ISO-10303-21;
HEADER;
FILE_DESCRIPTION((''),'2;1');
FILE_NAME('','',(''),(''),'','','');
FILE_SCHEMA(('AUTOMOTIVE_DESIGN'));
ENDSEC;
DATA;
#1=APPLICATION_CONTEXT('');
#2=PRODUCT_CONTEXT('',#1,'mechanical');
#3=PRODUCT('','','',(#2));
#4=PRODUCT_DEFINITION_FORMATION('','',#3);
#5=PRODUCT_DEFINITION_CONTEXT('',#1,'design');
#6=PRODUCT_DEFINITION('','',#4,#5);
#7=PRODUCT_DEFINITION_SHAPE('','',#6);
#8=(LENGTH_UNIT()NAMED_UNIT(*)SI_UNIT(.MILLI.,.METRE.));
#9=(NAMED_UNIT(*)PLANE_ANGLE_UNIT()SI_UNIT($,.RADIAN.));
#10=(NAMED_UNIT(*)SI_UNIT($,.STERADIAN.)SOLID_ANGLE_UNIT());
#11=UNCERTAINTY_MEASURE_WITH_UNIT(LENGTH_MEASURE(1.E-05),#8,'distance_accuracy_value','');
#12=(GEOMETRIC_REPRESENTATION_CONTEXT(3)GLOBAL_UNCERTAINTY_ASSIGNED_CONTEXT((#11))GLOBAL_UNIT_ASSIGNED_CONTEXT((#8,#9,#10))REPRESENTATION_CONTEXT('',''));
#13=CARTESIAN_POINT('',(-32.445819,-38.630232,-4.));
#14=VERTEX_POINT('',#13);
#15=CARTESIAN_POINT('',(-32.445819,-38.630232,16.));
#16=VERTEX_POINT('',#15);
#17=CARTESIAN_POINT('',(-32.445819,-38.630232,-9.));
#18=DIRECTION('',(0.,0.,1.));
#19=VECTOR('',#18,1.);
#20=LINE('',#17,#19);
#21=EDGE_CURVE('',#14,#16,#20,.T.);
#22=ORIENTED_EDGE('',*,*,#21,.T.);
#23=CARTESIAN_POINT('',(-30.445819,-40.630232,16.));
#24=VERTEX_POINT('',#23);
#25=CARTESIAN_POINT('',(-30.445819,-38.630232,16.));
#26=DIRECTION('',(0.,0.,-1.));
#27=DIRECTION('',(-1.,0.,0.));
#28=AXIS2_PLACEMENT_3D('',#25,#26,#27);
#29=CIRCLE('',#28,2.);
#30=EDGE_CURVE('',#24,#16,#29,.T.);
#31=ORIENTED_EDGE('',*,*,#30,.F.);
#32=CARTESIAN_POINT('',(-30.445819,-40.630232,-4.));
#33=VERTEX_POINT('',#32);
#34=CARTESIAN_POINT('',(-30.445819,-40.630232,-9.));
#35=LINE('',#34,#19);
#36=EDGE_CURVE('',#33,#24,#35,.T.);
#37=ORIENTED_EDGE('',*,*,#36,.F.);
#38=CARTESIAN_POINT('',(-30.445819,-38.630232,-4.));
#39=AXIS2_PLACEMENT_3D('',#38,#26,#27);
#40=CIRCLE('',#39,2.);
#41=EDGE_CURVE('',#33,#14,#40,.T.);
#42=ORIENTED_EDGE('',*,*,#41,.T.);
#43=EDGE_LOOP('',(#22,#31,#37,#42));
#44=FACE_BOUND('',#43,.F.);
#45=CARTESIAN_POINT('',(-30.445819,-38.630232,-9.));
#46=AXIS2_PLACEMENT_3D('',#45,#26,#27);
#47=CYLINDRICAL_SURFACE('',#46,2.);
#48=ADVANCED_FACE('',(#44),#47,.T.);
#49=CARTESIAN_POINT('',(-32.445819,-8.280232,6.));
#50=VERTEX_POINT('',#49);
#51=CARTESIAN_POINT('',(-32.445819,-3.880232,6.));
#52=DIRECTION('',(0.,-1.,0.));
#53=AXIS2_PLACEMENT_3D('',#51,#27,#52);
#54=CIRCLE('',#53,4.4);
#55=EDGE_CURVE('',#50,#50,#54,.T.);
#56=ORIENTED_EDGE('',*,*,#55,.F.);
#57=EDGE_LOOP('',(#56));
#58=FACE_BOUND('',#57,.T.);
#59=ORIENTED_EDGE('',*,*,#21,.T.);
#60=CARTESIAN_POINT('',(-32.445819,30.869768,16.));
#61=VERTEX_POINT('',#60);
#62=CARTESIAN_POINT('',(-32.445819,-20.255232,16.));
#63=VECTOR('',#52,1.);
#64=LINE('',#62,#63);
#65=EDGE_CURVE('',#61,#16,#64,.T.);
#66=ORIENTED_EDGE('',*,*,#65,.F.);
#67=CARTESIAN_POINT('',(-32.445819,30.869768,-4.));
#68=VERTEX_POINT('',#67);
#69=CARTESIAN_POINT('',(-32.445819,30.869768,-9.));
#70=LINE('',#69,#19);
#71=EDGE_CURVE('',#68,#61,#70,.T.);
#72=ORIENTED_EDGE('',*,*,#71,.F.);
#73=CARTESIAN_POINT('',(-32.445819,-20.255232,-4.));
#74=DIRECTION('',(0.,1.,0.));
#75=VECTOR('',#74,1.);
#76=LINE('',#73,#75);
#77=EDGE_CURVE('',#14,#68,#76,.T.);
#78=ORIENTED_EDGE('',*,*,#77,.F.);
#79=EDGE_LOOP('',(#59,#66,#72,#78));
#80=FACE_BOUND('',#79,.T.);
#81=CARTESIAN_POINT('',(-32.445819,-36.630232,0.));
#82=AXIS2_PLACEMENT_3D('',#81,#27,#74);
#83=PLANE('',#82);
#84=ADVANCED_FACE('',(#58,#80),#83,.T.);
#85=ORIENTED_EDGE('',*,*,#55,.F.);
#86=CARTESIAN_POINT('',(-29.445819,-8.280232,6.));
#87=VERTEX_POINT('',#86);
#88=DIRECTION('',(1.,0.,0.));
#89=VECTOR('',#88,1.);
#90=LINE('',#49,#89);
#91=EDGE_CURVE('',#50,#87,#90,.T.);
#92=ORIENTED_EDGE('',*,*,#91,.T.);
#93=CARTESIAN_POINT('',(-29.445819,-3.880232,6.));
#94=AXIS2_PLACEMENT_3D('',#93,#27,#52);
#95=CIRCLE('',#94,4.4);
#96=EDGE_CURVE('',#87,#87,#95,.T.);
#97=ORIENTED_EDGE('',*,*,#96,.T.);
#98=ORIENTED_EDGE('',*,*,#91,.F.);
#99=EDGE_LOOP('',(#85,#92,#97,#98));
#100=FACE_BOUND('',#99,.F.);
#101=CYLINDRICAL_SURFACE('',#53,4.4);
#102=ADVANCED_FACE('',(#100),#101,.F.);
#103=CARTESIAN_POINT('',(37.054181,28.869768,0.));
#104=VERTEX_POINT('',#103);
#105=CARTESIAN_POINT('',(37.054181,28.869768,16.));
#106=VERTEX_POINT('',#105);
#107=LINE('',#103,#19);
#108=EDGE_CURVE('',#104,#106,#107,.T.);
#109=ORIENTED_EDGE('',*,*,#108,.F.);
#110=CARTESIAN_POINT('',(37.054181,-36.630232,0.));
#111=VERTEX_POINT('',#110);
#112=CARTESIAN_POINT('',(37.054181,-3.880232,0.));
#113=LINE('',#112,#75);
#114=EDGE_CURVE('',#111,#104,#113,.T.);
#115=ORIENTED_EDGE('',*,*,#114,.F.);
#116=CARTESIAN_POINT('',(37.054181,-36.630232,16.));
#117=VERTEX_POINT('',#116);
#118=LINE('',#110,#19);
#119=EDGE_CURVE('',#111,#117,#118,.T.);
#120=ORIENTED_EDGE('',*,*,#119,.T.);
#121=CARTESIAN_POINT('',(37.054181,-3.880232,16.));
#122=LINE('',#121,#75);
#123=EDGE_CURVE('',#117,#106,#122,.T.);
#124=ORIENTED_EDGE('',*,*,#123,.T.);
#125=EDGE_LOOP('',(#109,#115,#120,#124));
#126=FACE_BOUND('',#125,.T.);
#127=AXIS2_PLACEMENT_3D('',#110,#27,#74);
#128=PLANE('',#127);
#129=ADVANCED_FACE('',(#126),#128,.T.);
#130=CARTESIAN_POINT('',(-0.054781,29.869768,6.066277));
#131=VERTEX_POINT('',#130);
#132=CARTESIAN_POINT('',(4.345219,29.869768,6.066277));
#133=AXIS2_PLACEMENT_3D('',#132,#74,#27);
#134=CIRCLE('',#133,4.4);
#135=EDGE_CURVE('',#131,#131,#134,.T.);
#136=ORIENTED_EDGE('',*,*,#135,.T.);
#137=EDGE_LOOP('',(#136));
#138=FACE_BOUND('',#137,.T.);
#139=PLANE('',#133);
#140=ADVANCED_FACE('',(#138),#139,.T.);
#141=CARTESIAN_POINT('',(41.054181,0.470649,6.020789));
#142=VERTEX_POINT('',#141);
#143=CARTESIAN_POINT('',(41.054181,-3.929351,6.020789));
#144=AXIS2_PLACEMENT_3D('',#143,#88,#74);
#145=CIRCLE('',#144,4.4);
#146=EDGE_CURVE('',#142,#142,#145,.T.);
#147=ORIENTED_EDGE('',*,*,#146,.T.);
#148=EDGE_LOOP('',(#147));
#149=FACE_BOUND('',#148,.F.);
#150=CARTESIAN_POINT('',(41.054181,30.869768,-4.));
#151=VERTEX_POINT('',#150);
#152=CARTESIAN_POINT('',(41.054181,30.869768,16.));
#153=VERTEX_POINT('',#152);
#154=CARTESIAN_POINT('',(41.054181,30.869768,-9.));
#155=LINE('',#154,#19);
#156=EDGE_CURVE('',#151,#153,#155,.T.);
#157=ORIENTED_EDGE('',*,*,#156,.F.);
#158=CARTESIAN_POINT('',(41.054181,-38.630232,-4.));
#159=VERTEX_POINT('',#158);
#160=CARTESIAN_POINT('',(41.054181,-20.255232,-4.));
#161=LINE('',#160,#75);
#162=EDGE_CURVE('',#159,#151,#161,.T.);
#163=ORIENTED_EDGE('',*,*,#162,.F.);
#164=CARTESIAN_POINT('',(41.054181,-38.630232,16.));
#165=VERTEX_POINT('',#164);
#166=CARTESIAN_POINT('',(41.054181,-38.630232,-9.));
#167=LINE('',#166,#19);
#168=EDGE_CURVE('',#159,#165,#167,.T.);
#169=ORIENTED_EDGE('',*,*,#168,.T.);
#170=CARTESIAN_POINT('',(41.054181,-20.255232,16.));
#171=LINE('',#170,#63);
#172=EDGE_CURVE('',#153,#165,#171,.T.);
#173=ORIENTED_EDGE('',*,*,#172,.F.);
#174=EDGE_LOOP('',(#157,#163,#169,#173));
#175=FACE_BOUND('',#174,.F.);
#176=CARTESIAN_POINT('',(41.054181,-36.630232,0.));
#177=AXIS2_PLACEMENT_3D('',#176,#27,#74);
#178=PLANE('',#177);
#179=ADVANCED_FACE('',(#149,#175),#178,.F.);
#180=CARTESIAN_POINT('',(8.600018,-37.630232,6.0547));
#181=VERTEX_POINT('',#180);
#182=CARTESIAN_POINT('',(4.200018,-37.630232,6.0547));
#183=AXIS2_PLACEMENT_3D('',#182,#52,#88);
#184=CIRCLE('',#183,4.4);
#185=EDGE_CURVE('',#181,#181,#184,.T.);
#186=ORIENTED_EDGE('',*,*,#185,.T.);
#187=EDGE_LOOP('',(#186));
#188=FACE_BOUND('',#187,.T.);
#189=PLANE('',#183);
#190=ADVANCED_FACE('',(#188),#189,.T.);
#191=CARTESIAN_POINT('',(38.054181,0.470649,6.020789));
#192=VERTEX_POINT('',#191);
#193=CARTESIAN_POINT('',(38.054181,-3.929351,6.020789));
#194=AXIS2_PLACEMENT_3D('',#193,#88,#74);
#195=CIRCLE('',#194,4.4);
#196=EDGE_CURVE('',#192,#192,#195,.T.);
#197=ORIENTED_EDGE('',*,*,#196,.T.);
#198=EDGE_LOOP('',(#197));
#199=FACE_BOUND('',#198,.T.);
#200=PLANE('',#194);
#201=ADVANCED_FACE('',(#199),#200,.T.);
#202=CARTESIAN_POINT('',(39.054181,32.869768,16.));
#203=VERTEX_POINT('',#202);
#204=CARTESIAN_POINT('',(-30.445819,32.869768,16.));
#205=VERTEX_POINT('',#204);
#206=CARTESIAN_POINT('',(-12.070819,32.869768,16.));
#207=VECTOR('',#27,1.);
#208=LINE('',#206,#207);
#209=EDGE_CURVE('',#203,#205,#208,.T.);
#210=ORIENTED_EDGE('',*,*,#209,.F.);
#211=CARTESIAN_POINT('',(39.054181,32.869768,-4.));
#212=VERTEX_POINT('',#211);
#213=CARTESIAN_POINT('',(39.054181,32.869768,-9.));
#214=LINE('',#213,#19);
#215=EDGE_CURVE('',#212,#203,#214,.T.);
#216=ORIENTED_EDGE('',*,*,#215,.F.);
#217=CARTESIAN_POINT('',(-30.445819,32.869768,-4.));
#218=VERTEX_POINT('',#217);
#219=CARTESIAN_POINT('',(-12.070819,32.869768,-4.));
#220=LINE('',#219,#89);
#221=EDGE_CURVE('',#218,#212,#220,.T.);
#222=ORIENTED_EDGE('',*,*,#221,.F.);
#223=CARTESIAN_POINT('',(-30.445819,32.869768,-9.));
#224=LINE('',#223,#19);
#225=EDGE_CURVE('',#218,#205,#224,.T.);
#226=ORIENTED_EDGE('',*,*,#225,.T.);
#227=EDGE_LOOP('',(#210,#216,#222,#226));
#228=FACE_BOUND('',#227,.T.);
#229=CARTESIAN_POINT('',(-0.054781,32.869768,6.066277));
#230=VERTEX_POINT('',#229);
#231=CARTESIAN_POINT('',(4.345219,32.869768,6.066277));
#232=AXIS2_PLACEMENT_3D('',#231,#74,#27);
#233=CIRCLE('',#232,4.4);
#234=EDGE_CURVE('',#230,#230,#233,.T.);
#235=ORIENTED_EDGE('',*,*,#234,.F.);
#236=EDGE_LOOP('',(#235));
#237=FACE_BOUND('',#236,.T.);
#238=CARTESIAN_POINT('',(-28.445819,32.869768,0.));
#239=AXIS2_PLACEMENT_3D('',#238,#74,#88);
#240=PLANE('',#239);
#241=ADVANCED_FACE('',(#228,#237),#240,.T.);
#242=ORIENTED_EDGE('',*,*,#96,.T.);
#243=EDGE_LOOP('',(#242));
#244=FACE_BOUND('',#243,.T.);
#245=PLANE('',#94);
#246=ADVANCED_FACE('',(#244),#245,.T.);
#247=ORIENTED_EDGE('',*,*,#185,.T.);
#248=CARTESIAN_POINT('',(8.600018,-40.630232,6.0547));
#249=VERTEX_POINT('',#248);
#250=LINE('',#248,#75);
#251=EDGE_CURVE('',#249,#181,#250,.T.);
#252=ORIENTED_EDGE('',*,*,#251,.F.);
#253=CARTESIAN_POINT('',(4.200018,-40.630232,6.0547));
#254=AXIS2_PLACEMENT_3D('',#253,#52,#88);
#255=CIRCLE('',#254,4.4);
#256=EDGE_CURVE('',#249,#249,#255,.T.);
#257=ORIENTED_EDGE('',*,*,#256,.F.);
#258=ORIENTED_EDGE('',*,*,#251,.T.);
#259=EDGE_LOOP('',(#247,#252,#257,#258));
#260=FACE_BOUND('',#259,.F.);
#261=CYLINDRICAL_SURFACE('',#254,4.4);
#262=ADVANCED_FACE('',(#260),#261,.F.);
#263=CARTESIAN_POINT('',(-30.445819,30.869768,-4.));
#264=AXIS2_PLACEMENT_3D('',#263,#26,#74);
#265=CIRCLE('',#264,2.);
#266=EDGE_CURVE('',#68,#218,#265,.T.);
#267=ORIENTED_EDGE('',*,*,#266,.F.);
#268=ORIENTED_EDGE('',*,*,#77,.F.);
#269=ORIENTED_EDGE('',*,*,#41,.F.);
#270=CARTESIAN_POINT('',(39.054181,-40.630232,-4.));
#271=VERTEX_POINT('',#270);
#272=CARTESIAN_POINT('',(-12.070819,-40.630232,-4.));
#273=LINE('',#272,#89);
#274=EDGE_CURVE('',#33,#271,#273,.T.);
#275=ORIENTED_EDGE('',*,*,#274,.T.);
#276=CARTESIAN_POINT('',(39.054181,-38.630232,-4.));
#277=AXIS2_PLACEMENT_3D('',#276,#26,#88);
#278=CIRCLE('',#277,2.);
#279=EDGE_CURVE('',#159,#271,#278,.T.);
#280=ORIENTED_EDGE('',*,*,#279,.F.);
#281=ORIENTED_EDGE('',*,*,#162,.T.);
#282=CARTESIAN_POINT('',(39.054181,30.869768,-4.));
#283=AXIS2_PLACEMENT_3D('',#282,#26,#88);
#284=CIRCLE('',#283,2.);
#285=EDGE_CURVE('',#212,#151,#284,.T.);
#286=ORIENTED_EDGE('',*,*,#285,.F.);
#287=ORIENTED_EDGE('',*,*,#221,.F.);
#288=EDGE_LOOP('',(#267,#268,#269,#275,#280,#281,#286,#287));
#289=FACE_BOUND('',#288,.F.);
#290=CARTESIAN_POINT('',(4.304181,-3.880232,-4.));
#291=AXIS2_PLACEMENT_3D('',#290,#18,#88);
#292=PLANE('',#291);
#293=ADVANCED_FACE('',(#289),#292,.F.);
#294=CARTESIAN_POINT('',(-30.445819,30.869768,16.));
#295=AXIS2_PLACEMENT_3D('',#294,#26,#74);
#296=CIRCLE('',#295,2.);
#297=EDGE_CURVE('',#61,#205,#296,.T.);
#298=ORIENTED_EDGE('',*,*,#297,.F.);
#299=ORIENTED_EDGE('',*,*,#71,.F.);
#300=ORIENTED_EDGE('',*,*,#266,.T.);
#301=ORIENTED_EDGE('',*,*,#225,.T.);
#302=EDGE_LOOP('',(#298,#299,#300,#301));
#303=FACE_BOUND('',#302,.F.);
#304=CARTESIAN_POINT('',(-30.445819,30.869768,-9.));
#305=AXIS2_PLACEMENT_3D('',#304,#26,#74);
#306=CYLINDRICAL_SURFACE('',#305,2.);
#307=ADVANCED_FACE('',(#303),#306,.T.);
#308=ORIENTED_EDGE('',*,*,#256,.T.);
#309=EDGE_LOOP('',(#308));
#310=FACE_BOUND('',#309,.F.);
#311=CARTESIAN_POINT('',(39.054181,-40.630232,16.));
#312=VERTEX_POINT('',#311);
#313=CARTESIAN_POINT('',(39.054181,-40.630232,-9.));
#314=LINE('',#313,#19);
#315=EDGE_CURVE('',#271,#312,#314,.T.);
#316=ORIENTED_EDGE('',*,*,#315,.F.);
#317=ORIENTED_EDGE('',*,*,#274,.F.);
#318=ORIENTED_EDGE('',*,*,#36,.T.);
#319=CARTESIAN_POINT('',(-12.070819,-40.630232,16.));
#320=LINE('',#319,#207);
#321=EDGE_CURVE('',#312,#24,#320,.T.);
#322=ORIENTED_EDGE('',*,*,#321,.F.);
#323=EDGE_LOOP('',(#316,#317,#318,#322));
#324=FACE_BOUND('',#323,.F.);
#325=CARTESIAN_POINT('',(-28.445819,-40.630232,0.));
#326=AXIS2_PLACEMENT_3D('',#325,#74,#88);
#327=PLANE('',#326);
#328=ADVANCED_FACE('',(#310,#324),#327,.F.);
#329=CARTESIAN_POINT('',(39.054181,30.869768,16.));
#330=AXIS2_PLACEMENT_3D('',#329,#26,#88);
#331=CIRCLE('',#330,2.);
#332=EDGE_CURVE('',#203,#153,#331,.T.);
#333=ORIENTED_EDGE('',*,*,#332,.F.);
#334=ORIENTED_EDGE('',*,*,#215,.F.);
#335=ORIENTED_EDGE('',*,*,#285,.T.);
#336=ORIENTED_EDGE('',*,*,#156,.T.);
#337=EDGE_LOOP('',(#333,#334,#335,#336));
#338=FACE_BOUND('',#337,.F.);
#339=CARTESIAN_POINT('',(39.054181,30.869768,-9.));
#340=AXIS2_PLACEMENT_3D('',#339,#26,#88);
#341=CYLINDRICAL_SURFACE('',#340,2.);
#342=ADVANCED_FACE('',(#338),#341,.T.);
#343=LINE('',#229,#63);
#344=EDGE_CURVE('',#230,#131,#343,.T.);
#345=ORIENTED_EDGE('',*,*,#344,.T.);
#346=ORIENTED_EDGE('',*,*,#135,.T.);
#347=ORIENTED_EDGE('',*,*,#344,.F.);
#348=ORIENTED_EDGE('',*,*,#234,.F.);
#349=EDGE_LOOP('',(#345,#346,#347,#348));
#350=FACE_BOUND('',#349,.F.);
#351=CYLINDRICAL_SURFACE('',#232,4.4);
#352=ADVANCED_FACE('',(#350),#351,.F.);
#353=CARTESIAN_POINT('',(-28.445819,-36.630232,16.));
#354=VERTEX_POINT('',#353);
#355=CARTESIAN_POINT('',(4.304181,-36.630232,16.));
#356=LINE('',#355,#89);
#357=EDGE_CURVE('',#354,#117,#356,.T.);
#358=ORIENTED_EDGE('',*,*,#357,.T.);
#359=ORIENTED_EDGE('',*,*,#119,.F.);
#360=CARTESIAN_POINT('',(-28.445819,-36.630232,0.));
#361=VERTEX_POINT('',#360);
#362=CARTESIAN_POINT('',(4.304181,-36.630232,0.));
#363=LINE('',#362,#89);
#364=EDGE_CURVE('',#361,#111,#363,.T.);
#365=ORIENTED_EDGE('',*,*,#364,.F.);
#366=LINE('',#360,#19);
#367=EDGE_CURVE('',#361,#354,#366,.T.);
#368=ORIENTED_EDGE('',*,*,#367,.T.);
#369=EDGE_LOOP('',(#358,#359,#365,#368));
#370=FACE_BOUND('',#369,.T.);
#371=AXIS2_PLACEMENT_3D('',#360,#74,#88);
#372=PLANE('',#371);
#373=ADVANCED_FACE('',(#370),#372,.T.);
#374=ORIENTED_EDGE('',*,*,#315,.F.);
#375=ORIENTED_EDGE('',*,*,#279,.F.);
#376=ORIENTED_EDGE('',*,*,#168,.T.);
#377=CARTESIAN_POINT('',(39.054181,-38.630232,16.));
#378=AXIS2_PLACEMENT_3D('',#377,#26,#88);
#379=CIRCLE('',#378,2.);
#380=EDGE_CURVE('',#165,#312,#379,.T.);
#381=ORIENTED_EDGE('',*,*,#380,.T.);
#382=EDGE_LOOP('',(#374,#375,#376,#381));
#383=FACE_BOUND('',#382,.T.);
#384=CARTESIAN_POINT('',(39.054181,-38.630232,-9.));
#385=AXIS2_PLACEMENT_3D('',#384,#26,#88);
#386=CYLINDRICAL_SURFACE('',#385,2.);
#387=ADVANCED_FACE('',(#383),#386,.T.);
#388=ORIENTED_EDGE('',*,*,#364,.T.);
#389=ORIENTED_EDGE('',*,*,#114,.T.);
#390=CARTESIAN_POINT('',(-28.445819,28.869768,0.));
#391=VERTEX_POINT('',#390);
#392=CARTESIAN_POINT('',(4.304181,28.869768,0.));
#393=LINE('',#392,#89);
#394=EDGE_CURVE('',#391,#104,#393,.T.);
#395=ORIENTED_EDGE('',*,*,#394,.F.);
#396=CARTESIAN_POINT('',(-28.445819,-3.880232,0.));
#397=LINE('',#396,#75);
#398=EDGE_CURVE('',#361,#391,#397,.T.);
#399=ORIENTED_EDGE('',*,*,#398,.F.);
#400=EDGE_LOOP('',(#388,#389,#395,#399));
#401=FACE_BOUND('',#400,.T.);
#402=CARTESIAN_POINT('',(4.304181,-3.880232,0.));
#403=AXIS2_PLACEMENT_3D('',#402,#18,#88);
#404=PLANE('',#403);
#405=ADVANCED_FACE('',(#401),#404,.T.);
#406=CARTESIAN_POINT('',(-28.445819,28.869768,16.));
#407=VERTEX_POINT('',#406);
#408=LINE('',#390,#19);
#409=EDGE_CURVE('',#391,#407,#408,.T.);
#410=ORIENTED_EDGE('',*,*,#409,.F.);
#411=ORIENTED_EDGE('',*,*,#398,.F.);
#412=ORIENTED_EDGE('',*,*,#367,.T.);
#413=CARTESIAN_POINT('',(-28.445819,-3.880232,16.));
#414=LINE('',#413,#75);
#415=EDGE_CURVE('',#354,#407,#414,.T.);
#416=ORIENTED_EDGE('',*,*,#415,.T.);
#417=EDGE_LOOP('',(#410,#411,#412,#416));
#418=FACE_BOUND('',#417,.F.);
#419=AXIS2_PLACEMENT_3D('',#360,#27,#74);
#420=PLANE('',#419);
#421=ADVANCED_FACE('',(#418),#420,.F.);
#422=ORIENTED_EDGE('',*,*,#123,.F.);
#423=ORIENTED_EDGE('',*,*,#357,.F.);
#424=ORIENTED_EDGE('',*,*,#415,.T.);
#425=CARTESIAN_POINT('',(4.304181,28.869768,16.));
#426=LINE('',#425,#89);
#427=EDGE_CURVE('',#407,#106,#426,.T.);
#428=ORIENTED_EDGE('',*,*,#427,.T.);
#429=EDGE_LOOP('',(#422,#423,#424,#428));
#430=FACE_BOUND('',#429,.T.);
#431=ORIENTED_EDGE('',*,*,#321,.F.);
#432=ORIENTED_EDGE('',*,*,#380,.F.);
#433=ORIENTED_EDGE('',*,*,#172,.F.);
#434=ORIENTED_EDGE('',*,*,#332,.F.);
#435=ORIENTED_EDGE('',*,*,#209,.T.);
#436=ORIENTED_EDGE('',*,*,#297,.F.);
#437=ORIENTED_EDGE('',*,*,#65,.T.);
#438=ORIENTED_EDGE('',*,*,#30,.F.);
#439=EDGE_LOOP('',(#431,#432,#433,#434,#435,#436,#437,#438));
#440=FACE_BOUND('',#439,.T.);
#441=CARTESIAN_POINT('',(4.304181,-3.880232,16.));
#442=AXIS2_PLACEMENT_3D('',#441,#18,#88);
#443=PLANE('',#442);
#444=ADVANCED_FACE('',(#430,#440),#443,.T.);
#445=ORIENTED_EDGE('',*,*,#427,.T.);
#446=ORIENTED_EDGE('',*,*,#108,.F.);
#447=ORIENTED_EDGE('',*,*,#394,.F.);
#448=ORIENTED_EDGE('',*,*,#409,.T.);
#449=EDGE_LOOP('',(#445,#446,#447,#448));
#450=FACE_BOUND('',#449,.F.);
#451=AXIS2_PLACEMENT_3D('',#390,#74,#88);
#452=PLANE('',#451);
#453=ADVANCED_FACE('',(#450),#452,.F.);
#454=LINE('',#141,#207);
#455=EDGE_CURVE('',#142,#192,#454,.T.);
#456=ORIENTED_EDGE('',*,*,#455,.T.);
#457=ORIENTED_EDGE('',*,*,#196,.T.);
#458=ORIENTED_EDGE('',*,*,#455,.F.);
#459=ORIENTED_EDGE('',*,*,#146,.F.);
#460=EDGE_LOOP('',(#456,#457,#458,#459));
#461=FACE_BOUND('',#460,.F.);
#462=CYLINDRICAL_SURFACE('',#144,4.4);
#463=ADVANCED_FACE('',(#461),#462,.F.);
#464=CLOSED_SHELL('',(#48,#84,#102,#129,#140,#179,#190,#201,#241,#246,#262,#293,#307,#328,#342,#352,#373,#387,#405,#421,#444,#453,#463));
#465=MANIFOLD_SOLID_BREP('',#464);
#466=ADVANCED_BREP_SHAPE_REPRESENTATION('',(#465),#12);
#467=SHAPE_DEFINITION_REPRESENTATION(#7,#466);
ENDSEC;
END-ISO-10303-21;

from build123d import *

# Parameters (mm, degrees)
F0_W        = 65.5
F0_H        = 65.5
F1_DEPTH    = 16
F2_T        = 4
F3_T1_DEPTH = 30
F4_R        = 4.4
F8_DEPTH    = 3
F9_DEPTH    = 3
F5_R        = 4.4
F10_DEPTH   = 3
F6_R        = 4.4
F11_DEPTH   = 3
F7_R        = 4.4
F12_DEPTH   = 3


# Not quite as in the source:
# - a fillet or chamfer that OpenCascade refuses, or shapes differently, is made with other operations: its cross-section is extruded or revolved along the edge and cut away or added


with BuildPart() as f1:
    # F0 (on Top) → F1 (new body)
    with BuildSketch(Plane.XY):
        with Locations((4.3041806072, -3.8802318871)):
            Rectangle(F0_W, F0_H)
    extrude(amount=F1_DEPTH)

    # F2
    f2_openings = [f1.faces().sort_by_distance(p)[0] for p in [
        (4.304181, -3.880232, 16),
    ]]
    offset(amount=F2_T, openings=f2_openings, kind=Kind.INTERSECTION)

    # F3: fillet of radius 2 on 4 edges, made by hand

    # F3_s2 → F3_t1 (cut)
    with BuildSketch(Plane.XY.offset(-9)):
        with BuildLine():
            ThreePointArc((41.0541806072, -38.6302318871), (40.4683941696, -40.0444454495), (39.0541806072, -40.6302318871))
            Line((39.0541806072, -40.6302318871), (41.0541806072, -40.6302318871))
            Line((41.0541806072, -40.6302318871), (41.0541806072, -38.6302318871))
        make_face()
        with BuildLine():
            ThreePointArc((41.0541806072, 30.8697681129), (40.4683941696, 32.2839816753), (39.0541806072, 32.8697681129))
            Line((39.0541806072, 32.8697681129), (41.0541806072, 32.8697681129))
            Line((41.0541806072, 32.8697681129), (41.0541806072, 30.8697681129))
        make_face()
        with BuildLine():
            ThreePointArc((-30.4458193928, 32.8697681129), (-31.8600329552, 32.2839816753), (-32.4458193928, 30.8697681129))
            Line((-32.4458193928, 30.8697681129), (-32.4458193928, 32.8697681129))
            Line((-32.4458193928, 32.8697681129), (-30.4458193928, 32.8697681129))
        make_face()
        with BuildLine():
            ThreePointArc((-32.4458193928, -38.6302318871), (-31.8600329552, -40.0444454495), (-30.4458193928, -40.6302318871))
            Line((-30.4458193928, -40.6302318871), (-32.4458193928, -40.6302318871))
            Line((-32.4458193928, -40.6302318871), (-32.4458193928, -38.6302318871))
        make_face()
    extrude(amount=F3_T1_DEPTH, mode=Mode.SUBTRACT)

    # F4 (on face) → F8 (join)
    with BuildSketch(Plane(origin=(-32.4458193928, 0, 0), x_dir=(0, -1, 0), z_dir=(-1, 0, 0))):
        with Locations((3.8802318871, 6)):
            Circle(F4_R)
    extrude(amount=-F8_DEPTH)

    # F4 (on face) → F9 (cut)
    with BuildSketch(Plane(origin=(-32.4458193928, 0, 0), x_dir=(0, -1, 0), z_dir=(-1, 0, 0))):
        with Locations((3.8802318871, 6)):
            Circle(F4_R)
    extrude(amount=-F9_DEPTH, mode=Mode.SUBTRACT)

    # F5 (on face) → F10 (cut)
    with BuildSketch(Plane.XZ.offset(40.6302318871)):
        with Locations((4.2000180173, 6.0547004089)):
            Circle(F5_R)
    extrude(amount=-F10_DEPTH, mode=Mode.SUBTRACT)

    # F6 (on face) → F11 (cut)
    with BuildSketch(Plane.YZ.offset(41.0541806072)):
        with Locations((-3.9293510383, 6.0207889489)):
            Circle(F6_R)
    extrude(amount=-F11_DEPTH, mode=Mode.SUBTRACT)

    # F7 (on face) → F12 (cut)
    with BuildSketch(Plane(origin=(0, 32.8697681129, 0), x_dir=(-1, 0, 0), z_dir=(0, 1, 0))):
        with Locations((-4.345219037, 6.0662772571)):
            Circle(F7_R)
    extrude(amount=-F12_DEPTH, mode=Mode.SUBTRACT)


solid = f1.part
